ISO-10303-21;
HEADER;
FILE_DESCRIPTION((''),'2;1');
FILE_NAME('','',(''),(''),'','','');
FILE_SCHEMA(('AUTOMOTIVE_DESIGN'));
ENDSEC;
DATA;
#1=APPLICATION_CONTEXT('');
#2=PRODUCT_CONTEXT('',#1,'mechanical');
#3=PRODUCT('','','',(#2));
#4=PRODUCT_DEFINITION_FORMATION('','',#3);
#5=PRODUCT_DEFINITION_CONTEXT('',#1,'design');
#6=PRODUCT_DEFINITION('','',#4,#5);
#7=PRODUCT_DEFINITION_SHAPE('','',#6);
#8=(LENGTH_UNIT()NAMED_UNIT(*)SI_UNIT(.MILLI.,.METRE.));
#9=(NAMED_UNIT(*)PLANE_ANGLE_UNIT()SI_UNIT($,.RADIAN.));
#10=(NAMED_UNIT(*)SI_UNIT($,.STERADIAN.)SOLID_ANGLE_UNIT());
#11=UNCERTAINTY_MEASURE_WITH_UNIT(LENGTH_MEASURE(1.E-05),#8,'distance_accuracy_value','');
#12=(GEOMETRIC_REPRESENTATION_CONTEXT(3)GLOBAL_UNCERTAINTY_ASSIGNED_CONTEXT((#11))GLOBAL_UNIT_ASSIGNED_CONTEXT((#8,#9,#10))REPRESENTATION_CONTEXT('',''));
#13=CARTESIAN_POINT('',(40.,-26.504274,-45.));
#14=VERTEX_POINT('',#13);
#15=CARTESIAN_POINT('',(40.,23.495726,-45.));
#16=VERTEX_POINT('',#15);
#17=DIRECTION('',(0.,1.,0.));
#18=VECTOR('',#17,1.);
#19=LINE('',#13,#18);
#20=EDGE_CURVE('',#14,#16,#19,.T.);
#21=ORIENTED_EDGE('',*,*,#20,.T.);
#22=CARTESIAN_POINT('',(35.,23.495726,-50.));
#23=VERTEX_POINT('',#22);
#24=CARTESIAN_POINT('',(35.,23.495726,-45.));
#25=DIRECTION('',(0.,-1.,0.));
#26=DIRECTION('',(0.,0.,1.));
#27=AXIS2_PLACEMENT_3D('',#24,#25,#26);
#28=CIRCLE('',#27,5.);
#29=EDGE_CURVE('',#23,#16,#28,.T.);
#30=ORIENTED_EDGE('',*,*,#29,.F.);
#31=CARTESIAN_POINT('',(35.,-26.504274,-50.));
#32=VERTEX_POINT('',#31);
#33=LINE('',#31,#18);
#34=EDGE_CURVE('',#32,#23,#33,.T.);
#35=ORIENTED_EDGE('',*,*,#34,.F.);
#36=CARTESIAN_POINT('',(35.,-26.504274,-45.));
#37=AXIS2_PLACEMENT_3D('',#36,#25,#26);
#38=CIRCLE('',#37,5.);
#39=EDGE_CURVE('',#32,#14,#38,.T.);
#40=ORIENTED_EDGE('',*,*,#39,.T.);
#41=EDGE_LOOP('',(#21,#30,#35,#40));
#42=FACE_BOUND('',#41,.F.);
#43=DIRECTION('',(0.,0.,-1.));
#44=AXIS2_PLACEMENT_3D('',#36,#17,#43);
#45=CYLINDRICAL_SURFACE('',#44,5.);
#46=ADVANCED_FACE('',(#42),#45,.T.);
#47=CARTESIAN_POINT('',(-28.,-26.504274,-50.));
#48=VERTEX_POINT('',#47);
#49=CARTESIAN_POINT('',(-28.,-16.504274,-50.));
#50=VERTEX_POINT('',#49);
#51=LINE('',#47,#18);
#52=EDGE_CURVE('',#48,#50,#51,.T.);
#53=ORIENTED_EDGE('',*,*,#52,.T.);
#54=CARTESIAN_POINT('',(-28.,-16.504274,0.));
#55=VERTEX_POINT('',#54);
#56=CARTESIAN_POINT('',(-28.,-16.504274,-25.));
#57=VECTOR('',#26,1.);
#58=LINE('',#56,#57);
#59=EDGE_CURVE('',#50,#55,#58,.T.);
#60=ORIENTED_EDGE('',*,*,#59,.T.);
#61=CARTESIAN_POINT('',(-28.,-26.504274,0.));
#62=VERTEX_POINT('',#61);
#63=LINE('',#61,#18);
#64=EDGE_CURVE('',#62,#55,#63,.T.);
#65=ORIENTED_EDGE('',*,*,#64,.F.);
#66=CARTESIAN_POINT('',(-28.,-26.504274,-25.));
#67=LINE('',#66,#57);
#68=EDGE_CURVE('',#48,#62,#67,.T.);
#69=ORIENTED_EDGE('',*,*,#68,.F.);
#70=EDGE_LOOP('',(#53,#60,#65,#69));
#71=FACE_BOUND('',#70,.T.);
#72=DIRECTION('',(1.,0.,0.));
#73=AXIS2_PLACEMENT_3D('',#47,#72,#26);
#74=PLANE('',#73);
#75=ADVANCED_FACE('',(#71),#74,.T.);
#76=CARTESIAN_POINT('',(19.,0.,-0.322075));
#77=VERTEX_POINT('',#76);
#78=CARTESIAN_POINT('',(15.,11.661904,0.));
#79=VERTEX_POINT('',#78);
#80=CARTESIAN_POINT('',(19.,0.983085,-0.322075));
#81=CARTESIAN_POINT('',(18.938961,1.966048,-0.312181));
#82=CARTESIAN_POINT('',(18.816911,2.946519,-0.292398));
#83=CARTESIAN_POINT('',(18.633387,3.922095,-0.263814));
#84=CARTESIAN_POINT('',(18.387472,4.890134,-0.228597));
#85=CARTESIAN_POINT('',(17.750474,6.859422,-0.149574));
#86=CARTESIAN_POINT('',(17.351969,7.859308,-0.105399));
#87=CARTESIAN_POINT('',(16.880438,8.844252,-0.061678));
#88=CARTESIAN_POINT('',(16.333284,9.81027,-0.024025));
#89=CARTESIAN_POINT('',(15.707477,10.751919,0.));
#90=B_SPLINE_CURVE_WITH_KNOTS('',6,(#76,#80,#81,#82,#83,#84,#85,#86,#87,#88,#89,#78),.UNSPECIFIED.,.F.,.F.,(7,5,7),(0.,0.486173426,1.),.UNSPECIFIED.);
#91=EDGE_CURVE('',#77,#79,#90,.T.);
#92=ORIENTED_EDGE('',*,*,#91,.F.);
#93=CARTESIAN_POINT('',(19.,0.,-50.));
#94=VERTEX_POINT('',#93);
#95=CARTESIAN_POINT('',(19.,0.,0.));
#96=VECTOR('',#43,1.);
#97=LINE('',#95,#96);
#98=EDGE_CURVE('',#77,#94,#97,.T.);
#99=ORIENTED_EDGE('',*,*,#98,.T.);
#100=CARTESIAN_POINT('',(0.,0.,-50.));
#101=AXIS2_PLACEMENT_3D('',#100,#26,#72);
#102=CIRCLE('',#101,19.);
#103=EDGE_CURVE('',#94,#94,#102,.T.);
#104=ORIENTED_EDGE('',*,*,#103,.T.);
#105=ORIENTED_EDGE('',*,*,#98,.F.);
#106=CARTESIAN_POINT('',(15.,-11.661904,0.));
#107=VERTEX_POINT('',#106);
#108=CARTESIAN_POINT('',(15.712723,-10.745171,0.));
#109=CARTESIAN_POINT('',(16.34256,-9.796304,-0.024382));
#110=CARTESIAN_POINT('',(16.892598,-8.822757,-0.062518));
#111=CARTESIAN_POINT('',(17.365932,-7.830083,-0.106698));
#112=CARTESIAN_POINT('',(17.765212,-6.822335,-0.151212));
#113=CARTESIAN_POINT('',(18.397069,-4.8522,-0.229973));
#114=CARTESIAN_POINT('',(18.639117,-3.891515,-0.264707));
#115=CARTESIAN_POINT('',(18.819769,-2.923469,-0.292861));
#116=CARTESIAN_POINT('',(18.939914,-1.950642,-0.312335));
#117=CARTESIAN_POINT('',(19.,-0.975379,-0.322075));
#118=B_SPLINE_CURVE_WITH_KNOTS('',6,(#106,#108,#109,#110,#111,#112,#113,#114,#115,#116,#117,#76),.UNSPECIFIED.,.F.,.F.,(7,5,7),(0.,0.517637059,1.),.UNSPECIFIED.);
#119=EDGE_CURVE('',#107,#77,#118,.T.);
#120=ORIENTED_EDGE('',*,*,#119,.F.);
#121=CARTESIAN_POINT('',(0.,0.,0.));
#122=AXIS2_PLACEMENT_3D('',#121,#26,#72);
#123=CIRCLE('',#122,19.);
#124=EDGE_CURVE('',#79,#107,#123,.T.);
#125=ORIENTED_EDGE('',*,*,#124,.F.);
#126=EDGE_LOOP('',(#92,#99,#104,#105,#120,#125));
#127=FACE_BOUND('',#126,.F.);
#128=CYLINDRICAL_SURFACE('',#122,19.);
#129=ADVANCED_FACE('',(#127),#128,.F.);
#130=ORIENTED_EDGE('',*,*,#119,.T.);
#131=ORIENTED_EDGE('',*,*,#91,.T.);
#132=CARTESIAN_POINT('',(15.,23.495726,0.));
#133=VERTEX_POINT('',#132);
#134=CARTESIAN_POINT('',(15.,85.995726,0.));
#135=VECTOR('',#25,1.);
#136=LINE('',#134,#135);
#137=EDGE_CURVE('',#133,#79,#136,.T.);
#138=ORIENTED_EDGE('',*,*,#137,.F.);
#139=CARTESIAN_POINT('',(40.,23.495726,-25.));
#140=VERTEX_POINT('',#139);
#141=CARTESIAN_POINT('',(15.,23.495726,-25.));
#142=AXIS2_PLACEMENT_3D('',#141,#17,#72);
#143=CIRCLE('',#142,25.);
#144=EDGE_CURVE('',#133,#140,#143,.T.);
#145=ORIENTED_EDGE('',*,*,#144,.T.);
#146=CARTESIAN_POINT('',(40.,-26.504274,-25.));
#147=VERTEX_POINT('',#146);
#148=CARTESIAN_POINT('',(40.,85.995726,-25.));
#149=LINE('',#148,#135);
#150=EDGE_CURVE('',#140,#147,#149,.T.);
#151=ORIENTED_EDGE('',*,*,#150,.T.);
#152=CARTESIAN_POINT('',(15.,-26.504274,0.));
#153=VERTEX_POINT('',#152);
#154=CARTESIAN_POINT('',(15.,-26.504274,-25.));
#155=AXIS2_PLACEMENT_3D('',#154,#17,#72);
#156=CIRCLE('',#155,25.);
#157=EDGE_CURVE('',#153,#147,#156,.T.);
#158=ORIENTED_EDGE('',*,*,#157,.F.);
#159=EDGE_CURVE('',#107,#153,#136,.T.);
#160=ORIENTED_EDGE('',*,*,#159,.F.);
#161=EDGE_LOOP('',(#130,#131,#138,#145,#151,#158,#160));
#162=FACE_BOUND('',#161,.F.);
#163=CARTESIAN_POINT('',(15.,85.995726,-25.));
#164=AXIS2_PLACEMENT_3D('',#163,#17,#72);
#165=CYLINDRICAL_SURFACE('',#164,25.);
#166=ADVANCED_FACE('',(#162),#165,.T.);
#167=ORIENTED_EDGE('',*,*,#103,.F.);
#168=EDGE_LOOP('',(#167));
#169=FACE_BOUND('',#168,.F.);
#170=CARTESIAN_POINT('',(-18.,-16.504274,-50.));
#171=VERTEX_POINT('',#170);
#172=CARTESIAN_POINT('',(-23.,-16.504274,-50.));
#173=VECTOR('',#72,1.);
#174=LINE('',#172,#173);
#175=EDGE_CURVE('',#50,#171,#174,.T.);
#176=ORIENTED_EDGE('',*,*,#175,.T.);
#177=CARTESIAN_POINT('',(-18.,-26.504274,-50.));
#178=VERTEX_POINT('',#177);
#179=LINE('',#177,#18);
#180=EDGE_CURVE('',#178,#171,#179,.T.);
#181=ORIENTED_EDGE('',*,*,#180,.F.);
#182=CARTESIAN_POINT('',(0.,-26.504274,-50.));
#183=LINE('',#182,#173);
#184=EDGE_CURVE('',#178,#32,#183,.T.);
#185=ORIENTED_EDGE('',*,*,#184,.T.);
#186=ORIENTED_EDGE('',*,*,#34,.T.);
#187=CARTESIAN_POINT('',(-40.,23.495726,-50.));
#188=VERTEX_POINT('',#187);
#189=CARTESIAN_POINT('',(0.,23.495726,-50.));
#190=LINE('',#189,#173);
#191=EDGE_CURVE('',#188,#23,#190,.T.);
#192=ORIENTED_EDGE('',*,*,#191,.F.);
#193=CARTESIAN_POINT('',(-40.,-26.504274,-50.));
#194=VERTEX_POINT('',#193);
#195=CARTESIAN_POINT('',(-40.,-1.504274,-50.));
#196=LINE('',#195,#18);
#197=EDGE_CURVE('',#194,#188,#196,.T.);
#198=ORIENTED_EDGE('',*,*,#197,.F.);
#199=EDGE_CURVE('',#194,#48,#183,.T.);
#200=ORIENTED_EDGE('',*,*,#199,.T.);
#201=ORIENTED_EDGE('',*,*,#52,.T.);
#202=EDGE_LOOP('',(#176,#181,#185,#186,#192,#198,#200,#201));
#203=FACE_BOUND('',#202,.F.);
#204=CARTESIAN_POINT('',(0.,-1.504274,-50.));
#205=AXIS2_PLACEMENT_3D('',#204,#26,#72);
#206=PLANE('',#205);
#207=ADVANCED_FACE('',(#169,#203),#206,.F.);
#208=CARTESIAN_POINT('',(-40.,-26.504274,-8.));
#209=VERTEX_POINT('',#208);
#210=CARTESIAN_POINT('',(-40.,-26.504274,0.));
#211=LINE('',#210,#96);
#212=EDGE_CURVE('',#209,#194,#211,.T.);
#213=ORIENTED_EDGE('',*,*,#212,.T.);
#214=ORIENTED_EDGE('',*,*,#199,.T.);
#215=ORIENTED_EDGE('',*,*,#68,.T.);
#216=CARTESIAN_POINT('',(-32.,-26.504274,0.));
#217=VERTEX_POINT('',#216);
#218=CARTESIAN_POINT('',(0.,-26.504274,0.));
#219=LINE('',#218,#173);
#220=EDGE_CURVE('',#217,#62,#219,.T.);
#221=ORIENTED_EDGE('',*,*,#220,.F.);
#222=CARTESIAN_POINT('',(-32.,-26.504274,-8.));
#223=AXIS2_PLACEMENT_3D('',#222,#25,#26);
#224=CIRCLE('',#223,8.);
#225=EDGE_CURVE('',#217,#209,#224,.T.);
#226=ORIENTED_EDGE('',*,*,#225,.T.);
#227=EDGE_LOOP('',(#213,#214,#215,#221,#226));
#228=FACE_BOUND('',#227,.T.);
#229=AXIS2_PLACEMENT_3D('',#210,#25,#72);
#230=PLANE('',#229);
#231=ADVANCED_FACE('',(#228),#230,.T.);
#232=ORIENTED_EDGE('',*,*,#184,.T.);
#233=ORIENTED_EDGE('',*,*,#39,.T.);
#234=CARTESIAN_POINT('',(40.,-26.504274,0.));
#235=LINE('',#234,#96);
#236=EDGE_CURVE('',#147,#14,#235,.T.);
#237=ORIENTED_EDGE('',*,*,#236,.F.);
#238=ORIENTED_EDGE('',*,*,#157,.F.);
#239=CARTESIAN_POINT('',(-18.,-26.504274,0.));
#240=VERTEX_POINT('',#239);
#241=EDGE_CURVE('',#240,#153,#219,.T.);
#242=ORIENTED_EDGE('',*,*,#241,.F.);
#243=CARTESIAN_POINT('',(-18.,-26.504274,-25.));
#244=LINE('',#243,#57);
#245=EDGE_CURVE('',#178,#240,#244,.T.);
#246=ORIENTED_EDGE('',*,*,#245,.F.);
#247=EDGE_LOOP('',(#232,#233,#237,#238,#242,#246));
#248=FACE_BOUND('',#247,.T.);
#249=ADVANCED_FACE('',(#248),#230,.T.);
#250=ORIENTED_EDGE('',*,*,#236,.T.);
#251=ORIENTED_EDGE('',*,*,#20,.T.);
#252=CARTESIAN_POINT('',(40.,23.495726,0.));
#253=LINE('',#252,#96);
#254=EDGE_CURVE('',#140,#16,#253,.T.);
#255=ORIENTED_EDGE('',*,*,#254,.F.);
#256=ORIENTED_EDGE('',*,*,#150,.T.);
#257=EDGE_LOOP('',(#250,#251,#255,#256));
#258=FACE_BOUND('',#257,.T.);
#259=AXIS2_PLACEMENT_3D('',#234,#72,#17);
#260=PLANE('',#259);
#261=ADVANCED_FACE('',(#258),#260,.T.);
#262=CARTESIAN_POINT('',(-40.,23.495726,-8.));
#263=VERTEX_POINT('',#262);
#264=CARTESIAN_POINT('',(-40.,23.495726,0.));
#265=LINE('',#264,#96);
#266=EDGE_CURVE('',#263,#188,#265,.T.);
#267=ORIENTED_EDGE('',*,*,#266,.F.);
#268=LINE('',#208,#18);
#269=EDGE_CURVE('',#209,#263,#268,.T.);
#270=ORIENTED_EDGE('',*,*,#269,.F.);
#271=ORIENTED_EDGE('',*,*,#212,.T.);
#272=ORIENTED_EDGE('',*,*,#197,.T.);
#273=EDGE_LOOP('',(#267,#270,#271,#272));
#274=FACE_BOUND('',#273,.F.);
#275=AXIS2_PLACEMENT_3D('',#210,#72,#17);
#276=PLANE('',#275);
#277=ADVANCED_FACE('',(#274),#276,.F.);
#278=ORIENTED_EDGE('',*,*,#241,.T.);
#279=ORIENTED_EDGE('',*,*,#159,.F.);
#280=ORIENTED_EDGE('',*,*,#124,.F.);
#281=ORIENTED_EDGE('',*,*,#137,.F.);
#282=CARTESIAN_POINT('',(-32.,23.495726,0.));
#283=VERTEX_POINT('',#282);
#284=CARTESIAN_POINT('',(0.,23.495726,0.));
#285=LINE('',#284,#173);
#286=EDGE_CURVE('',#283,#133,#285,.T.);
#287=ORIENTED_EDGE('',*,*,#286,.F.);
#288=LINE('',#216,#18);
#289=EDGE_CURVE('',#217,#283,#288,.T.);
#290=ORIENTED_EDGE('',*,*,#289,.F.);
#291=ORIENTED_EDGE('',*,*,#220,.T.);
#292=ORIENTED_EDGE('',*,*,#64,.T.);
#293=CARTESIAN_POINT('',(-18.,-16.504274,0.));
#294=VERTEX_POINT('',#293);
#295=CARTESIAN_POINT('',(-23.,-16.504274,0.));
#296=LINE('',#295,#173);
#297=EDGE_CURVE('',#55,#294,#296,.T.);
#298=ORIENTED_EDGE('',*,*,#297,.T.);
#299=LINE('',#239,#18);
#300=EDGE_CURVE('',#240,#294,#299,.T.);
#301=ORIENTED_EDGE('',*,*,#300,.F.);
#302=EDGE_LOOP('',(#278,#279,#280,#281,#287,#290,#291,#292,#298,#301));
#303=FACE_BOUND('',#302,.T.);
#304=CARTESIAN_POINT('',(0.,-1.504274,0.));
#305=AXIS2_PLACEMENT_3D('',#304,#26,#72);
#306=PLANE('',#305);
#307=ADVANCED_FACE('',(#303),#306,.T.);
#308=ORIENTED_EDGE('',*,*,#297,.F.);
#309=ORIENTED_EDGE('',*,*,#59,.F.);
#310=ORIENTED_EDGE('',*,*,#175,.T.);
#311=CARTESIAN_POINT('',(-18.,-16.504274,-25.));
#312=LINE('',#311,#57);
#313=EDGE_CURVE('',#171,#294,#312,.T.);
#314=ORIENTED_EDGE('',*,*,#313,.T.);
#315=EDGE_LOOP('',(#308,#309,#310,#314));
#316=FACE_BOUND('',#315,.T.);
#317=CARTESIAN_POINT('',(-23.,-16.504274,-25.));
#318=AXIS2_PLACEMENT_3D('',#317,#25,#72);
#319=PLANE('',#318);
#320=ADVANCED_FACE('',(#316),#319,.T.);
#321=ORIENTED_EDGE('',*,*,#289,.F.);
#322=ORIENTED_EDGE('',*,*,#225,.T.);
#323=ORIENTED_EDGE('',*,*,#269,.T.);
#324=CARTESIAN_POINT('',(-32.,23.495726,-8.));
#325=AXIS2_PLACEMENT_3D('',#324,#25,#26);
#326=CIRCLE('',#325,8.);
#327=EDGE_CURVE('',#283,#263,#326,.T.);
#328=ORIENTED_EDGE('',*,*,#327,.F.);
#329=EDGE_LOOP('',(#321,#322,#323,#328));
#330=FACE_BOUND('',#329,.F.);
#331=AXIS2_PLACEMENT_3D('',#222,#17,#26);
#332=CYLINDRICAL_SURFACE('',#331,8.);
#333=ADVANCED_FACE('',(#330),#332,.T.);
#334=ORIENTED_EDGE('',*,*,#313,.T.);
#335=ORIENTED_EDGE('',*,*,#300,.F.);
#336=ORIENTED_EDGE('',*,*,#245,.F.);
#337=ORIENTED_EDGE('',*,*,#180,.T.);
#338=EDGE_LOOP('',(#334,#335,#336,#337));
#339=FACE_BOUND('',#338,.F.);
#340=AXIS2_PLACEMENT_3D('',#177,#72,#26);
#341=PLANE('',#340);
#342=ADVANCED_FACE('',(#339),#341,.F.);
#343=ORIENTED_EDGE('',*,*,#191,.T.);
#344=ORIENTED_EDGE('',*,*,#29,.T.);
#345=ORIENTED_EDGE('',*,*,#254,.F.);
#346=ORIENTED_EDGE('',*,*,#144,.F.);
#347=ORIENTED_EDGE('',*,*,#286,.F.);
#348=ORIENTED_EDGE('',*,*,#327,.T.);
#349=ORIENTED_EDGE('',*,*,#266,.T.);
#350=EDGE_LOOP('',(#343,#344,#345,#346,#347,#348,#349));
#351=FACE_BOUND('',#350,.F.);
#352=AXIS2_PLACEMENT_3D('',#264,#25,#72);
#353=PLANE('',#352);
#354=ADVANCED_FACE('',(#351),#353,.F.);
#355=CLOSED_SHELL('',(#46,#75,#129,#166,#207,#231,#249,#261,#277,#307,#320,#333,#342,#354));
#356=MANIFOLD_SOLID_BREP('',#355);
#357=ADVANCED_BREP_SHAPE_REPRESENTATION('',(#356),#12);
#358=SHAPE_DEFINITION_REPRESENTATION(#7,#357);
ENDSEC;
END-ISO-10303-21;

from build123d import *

# Parameters (mm, degrees)
F0_W        = 80
F0_H        = 50
F0_R        = 19
F1_DEPTH    = 50
F2_T1_DEPTH = 175
F3_R        = 5
F4_R        = 8
F5_W        = 10
F5_H        = 50
F6_DEPTH    = 10


# Not quite as in the source:
# - a fillet or chamfer that OpenCascade refuses, or shapes differently, is made with other operations: its cross-section is extruded or revolved along the edge and cut away or added


with BuildPart() as f1:
    # F0 (on Top) → F1 (new body)
    with BuildSketch(Plane.XY):
        with Locations((0, -1.5042735598)):
            Rectangle(F0_W, F0_H)
        Circle(F0_R, mode=Mode.SUBTRACT)
    extrude(amount=-F1_DEPTH)

    # F2: fillet of radius 25 on 1 edges, made by hand

    # F2_s2 → F2_t1 (cut)
    with BuildSketch(Plane.XZ.offset(-85.9957264402)):
        with BuildLine():
            ThreePointArc((40, -25), (32.6776695297, -7.3223304703), (15, 0))
            Line((15, 0), (40, 0))
            Line((40, 0), (40, -25))
        make_face()
    extrude(amount=F2_T1_DEPTH, mode=Mode.SUBTRACT)

    # F3
    f3_edges = [f1.edges().sort_by_distance(p)[0] for p in [
        (40, -1.504274, -50),
    ]]
    fillet(f3_edges, radius=F3_R)

    # F4
    f4_edges = [f1.edges().sort_by_distance(p)[0] for p in [
        (-40, -1.504274, 0),
    ]]
    fillet(f4_edges, radius=F4_R)

    # F5 (on face) → F6 (cut)
    with BuildSketch(Plane.XZ.offset(26.5042735598)):
        with Locations((-23, -25)):
            Rectangle(F5_W, F5_H)
    extrude(amount=-F6_DEPTH, mode=Mode.SUBTRACT)


solid = f1.part
